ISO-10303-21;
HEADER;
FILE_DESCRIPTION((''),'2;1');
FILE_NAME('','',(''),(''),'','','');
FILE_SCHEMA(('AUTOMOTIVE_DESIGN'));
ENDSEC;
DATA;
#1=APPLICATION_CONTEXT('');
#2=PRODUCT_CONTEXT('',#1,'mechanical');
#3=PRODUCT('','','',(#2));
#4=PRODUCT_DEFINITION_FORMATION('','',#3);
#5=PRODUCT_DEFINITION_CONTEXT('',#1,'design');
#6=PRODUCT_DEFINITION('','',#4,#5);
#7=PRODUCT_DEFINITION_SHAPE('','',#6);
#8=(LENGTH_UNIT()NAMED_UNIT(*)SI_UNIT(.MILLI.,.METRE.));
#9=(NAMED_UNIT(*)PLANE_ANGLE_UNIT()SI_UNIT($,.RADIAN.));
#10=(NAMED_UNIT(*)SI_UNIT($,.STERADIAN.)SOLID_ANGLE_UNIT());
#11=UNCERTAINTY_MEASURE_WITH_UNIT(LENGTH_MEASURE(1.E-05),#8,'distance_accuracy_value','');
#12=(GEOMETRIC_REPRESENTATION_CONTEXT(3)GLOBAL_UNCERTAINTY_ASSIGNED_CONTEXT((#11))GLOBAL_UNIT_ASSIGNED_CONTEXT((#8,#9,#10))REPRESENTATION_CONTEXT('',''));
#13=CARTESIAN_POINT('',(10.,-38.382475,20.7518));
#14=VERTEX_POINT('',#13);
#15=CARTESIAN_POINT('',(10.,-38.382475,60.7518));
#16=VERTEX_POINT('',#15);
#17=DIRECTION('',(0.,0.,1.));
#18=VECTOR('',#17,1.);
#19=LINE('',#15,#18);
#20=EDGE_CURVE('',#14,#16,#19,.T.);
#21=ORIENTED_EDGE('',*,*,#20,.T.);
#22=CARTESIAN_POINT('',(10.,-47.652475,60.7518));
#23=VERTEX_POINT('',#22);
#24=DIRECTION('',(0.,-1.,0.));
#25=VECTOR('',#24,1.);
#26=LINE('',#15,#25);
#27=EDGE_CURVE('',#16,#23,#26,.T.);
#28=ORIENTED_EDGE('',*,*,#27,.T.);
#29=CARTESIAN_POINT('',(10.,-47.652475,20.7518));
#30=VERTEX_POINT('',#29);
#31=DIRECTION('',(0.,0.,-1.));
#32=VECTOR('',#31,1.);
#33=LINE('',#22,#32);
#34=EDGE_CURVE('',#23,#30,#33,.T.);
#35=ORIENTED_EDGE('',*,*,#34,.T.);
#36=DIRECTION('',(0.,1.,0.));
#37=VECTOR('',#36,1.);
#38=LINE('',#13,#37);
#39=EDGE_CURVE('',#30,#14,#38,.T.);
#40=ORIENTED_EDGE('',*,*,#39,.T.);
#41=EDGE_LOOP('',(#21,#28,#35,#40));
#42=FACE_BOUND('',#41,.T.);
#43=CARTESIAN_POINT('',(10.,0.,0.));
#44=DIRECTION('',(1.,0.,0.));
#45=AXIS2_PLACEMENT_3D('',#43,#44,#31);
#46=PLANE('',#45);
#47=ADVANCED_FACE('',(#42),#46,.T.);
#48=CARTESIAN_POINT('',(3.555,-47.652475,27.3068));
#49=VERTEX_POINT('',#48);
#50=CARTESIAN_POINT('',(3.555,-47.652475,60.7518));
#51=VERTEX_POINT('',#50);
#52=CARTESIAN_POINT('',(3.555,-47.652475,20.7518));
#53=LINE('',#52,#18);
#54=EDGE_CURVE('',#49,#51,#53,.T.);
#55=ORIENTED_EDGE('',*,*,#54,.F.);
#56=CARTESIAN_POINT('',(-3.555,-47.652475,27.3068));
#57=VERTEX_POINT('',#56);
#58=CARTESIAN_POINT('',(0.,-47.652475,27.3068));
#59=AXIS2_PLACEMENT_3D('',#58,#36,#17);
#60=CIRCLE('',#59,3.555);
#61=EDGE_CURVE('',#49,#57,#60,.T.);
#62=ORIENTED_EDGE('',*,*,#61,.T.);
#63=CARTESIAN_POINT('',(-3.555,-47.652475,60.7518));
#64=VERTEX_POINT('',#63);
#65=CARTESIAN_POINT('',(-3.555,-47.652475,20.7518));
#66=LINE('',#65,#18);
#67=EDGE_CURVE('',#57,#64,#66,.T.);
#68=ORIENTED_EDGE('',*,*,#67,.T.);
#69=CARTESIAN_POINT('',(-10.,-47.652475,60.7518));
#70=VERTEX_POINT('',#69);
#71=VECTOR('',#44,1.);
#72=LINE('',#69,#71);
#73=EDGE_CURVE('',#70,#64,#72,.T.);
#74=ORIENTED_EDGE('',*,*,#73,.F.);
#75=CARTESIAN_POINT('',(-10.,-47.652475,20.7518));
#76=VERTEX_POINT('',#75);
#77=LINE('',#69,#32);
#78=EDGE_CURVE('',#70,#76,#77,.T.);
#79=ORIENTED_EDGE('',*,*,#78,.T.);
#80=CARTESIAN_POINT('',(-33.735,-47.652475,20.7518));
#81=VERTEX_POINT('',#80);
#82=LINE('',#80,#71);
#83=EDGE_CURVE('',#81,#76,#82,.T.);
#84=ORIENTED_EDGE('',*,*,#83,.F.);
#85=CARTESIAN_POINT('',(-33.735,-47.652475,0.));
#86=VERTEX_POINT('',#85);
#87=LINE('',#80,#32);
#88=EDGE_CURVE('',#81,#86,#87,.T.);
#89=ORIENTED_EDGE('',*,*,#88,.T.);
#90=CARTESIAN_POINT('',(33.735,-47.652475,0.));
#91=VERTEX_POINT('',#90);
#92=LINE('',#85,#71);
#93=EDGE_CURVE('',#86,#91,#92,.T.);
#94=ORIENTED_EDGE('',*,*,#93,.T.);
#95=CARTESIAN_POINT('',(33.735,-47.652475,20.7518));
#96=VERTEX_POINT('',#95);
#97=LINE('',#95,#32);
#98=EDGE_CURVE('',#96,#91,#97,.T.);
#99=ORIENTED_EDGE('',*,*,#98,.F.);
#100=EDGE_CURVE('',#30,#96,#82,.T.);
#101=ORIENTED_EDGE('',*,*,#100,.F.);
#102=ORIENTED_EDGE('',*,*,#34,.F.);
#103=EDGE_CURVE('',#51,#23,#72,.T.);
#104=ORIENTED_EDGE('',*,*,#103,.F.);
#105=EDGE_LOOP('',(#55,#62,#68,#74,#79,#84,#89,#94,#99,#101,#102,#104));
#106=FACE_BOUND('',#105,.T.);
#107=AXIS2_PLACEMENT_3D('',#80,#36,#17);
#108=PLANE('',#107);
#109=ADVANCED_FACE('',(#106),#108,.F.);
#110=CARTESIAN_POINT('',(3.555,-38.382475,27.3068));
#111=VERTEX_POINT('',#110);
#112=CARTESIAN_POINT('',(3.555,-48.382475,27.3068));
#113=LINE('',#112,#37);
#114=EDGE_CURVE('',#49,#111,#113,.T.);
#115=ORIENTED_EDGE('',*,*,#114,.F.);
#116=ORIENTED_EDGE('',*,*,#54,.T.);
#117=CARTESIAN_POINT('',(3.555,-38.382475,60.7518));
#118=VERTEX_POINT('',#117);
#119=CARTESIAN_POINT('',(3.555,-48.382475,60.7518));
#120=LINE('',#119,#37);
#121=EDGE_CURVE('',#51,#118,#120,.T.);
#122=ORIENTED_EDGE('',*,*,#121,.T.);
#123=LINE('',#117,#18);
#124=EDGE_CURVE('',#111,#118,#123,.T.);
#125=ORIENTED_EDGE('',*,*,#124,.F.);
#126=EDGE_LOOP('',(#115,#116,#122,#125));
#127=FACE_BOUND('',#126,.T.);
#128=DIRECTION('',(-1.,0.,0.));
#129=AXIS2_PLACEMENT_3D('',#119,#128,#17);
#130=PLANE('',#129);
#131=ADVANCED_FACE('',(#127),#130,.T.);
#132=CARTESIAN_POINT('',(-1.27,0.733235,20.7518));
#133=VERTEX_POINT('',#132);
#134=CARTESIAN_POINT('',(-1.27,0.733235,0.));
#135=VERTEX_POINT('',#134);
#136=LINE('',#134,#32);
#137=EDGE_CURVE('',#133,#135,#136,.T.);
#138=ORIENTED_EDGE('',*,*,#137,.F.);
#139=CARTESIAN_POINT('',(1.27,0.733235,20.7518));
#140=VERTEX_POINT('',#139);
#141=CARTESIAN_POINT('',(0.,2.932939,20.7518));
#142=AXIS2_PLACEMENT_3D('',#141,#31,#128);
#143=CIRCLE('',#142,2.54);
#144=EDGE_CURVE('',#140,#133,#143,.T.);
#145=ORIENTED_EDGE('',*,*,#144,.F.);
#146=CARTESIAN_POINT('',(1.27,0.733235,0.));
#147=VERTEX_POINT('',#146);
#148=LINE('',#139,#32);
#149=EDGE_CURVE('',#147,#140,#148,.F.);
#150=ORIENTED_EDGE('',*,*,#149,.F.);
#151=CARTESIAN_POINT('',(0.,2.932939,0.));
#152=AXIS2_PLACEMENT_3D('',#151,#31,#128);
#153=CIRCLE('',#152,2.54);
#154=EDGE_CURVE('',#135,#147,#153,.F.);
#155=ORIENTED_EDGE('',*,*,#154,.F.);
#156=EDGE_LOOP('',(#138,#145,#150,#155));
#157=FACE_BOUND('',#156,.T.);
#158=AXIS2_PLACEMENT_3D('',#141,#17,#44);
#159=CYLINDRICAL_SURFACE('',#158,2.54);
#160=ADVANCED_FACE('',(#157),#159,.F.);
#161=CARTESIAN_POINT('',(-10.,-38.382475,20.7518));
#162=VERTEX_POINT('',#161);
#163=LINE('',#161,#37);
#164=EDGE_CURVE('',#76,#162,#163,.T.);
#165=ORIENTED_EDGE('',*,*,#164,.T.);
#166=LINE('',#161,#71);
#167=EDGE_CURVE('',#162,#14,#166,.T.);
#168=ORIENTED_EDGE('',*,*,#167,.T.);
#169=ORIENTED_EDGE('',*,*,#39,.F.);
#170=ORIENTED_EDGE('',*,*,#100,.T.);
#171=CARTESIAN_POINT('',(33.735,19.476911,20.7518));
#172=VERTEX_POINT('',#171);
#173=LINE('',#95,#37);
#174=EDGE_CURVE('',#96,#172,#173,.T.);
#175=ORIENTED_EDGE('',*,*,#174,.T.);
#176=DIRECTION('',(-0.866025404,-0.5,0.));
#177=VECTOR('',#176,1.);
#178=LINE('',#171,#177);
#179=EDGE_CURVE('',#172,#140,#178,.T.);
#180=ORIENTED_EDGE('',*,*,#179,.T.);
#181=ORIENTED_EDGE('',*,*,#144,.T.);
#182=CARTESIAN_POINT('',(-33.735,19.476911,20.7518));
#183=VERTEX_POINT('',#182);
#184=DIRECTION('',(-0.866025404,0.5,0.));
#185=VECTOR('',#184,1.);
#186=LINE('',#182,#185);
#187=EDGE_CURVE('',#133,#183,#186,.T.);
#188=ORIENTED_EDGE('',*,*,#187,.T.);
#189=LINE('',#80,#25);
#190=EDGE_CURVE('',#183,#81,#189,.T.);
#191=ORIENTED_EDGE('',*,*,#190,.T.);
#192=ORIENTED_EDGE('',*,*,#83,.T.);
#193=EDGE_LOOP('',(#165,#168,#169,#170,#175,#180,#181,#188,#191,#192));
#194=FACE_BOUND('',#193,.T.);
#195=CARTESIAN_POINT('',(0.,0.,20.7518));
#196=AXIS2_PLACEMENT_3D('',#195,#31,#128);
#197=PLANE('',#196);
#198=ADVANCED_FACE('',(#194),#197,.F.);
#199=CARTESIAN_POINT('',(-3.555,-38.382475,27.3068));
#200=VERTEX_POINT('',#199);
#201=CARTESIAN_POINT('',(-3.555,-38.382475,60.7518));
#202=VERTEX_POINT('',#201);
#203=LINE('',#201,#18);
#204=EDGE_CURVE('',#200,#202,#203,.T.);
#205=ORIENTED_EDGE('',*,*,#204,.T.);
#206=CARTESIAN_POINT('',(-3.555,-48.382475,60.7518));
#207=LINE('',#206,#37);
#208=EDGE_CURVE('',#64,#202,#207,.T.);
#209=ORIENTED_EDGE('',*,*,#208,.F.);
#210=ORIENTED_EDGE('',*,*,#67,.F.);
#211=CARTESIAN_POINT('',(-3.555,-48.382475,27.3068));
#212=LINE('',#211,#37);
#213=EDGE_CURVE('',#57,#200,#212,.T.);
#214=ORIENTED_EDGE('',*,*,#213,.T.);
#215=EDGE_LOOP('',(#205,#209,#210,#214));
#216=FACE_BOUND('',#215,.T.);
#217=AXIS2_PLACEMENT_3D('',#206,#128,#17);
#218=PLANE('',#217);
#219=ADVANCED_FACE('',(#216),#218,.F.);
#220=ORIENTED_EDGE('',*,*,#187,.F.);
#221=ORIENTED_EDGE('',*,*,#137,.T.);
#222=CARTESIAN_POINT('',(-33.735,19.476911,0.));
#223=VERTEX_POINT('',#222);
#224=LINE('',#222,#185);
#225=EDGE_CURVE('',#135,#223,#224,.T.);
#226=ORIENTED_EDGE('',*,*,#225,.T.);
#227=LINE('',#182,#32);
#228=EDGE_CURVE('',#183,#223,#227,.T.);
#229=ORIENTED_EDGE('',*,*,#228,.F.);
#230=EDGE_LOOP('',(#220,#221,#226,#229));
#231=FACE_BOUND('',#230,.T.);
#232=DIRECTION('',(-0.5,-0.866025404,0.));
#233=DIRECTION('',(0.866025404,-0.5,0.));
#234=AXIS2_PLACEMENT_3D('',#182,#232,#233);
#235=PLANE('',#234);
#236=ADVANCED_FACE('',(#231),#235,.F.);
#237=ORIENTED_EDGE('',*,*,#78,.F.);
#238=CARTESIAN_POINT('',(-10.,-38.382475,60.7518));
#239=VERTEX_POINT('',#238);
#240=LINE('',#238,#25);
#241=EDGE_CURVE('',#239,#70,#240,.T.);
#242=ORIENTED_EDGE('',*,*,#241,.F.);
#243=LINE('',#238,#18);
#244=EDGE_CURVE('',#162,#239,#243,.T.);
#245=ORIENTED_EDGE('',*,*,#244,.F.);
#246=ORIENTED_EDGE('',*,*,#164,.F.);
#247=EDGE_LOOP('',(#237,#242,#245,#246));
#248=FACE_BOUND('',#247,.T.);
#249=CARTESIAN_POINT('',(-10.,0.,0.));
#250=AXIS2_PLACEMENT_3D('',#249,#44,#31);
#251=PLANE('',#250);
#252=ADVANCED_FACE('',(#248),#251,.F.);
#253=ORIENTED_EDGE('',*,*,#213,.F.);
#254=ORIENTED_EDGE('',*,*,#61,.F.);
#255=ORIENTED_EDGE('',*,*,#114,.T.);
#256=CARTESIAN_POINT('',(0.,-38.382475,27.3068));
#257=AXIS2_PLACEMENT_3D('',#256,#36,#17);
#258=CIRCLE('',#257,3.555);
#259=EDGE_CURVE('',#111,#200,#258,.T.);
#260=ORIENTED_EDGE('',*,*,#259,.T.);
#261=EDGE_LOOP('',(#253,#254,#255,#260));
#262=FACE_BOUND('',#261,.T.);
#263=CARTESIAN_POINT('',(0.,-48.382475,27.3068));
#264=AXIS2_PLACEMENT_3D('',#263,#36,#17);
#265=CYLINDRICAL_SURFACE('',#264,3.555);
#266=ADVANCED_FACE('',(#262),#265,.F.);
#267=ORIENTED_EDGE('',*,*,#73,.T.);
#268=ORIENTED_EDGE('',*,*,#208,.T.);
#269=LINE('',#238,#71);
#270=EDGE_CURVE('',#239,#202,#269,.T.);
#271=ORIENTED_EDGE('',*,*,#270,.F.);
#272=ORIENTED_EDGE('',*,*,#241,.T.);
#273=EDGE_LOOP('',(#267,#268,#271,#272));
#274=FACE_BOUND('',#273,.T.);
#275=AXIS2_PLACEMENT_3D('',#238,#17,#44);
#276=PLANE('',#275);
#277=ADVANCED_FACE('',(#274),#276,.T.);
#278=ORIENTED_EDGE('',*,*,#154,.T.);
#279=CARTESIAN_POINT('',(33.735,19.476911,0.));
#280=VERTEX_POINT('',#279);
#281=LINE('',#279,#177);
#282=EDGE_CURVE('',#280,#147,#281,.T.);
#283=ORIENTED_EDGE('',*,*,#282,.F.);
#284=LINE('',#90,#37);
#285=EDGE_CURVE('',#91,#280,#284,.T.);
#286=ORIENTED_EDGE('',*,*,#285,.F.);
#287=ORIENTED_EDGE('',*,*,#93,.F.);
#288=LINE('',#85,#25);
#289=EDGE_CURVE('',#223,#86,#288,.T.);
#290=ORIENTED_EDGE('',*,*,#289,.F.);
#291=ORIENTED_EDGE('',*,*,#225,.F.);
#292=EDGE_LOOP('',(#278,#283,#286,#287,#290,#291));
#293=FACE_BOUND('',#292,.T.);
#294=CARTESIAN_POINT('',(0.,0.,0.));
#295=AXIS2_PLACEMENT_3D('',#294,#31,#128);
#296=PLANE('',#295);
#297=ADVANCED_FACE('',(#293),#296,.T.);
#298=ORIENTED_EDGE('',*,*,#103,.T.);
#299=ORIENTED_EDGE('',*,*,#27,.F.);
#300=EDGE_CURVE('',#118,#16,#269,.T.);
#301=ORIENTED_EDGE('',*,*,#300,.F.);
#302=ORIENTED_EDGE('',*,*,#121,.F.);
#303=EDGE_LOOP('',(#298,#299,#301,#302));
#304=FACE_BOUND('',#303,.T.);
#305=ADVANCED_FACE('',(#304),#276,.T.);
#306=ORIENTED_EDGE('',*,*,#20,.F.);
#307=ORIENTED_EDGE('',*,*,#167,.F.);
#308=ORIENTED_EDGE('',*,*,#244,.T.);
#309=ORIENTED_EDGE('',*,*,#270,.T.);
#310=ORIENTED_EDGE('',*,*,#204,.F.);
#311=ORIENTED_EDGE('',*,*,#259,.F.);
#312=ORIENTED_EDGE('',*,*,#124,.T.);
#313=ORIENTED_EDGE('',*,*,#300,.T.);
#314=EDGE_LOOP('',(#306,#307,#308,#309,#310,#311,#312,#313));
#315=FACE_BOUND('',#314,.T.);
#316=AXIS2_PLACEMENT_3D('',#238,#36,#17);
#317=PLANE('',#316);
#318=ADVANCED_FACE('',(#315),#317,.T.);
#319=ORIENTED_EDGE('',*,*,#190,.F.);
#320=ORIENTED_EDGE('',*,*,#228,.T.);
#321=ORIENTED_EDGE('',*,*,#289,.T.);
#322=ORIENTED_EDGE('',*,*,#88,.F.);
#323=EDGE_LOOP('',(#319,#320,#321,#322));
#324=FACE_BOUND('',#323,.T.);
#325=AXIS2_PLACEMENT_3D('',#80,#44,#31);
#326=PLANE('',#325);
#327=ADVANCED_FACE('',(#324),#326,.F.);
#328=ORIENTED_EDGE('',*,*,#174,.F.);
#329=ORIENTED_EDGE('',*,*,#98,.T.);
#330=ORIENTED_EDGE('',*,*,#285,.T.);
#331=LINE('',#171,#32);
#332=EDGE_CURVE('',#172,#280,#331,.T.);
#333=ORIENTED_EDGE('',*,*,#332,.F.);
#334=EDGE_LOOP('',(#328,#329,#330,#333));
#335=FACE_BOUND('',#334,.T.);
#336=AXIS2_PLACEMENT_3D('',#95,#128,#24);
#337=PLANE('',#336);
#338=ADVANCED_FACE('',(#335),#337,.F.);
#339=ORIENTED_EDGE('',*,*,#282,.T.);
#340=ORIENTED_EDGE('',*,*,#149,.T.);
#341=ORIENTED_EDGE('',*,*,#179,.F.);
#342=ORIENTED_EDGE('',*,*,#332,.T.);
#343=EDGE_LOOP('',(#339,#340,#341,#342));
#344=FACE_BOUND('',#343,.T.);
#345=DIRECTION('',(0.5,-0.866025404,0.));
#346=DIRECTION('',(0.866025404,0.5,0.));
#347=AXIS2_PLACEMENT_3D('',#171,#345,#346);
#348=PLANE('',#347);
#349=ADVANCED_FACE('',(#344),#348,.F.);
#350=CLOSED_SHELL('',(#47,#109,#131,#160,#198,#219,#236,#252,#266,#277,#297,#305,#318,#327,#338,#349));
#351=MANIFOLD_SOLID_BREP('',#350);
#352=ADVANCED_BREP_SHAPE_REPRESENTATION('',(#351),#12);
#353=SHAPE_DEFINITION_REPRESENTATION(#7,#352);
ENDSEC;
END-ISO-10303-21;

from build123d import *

# Parameters (mm, degrees)
BOSS_EXTRUDE1_DEPTH      = 20.7518
BOSS_EXTRUDE3_DEPTH      = 10
BOSS_EXTRUDE3_DEPTH_BACK = 10
SKETCH6_W                = 40
SKETCH6_H                = 9.27
FILLET1_R                = 2.54
CUT_EXTRUDE11_START      = -47.652475
CUT_EXTRUDE11_DEPTH      = 10


with BuildPart() as part:
    # Sketch1 → Boss-Extrude1 (new body)
    with BuildSketch(Plane.XY):
        Polygon((-33.735, 19.476911331), (0, 0), (33.735, 19.476911331), (33.735, -47.652474646), (-33.735, -47.652474646), align=None)
    extrude(amount=BOSS_EXTRUDE1_DEPTH)

    # Sketch6 → Boss-Extrude3 (add, two sides: drawn at the far end of the back side and taken through both)
    with BuildSketch(Plane(origin=(0, 0, 0), x_dir=(0, 0, -1), z_dir=(1, 0, 0)).offset(-BOSS_EXTRUDE3_DEPTH_BACK)):
        with Locations((-40.7518, -43.017474646)):
            Rectangle(SKETCH6_W, SKETCH6_H)
    extrude(amount=BOSS_EXTRUDE3_DEPTH + BOSS_EXTRUDE3_DEPTH_BACK)

    # Fillet1
    fillet1_edges = [part.edges().sort_by_distance(p)[0] for p in [
        (0, 0, 10.3759),
    ]]
    fillet(fillet1_edges, radius=FILLET1_R)

    # Sketch7 → Cut-Extrude11 (cut)
    with BuildSketch(Plane(origin=(0, 0, 0), x_dir=(1, 0, 0), z_dir=(0, 1, 0)).offset(CUT_EXTRUDE11_START)):
        with BuildLine():
            Line((-3.555, -27.3068), (-3.555, -94.1968))
            ThreePointArc((-3.555, -94.1968), (0, -97.7518), (3.555, -94.1968))
            Line((3.555, -94.1968), (3.555, -27.3068))
            ThreePointArc((3.555, -27.3068), (0, -23.7518), (-3.555, -27.3068))
        make_face()
    extrude(amount=CUT_EXTRUDE11_DEPTH, mode=Mode.SUBTRACT)


solid = part.part
